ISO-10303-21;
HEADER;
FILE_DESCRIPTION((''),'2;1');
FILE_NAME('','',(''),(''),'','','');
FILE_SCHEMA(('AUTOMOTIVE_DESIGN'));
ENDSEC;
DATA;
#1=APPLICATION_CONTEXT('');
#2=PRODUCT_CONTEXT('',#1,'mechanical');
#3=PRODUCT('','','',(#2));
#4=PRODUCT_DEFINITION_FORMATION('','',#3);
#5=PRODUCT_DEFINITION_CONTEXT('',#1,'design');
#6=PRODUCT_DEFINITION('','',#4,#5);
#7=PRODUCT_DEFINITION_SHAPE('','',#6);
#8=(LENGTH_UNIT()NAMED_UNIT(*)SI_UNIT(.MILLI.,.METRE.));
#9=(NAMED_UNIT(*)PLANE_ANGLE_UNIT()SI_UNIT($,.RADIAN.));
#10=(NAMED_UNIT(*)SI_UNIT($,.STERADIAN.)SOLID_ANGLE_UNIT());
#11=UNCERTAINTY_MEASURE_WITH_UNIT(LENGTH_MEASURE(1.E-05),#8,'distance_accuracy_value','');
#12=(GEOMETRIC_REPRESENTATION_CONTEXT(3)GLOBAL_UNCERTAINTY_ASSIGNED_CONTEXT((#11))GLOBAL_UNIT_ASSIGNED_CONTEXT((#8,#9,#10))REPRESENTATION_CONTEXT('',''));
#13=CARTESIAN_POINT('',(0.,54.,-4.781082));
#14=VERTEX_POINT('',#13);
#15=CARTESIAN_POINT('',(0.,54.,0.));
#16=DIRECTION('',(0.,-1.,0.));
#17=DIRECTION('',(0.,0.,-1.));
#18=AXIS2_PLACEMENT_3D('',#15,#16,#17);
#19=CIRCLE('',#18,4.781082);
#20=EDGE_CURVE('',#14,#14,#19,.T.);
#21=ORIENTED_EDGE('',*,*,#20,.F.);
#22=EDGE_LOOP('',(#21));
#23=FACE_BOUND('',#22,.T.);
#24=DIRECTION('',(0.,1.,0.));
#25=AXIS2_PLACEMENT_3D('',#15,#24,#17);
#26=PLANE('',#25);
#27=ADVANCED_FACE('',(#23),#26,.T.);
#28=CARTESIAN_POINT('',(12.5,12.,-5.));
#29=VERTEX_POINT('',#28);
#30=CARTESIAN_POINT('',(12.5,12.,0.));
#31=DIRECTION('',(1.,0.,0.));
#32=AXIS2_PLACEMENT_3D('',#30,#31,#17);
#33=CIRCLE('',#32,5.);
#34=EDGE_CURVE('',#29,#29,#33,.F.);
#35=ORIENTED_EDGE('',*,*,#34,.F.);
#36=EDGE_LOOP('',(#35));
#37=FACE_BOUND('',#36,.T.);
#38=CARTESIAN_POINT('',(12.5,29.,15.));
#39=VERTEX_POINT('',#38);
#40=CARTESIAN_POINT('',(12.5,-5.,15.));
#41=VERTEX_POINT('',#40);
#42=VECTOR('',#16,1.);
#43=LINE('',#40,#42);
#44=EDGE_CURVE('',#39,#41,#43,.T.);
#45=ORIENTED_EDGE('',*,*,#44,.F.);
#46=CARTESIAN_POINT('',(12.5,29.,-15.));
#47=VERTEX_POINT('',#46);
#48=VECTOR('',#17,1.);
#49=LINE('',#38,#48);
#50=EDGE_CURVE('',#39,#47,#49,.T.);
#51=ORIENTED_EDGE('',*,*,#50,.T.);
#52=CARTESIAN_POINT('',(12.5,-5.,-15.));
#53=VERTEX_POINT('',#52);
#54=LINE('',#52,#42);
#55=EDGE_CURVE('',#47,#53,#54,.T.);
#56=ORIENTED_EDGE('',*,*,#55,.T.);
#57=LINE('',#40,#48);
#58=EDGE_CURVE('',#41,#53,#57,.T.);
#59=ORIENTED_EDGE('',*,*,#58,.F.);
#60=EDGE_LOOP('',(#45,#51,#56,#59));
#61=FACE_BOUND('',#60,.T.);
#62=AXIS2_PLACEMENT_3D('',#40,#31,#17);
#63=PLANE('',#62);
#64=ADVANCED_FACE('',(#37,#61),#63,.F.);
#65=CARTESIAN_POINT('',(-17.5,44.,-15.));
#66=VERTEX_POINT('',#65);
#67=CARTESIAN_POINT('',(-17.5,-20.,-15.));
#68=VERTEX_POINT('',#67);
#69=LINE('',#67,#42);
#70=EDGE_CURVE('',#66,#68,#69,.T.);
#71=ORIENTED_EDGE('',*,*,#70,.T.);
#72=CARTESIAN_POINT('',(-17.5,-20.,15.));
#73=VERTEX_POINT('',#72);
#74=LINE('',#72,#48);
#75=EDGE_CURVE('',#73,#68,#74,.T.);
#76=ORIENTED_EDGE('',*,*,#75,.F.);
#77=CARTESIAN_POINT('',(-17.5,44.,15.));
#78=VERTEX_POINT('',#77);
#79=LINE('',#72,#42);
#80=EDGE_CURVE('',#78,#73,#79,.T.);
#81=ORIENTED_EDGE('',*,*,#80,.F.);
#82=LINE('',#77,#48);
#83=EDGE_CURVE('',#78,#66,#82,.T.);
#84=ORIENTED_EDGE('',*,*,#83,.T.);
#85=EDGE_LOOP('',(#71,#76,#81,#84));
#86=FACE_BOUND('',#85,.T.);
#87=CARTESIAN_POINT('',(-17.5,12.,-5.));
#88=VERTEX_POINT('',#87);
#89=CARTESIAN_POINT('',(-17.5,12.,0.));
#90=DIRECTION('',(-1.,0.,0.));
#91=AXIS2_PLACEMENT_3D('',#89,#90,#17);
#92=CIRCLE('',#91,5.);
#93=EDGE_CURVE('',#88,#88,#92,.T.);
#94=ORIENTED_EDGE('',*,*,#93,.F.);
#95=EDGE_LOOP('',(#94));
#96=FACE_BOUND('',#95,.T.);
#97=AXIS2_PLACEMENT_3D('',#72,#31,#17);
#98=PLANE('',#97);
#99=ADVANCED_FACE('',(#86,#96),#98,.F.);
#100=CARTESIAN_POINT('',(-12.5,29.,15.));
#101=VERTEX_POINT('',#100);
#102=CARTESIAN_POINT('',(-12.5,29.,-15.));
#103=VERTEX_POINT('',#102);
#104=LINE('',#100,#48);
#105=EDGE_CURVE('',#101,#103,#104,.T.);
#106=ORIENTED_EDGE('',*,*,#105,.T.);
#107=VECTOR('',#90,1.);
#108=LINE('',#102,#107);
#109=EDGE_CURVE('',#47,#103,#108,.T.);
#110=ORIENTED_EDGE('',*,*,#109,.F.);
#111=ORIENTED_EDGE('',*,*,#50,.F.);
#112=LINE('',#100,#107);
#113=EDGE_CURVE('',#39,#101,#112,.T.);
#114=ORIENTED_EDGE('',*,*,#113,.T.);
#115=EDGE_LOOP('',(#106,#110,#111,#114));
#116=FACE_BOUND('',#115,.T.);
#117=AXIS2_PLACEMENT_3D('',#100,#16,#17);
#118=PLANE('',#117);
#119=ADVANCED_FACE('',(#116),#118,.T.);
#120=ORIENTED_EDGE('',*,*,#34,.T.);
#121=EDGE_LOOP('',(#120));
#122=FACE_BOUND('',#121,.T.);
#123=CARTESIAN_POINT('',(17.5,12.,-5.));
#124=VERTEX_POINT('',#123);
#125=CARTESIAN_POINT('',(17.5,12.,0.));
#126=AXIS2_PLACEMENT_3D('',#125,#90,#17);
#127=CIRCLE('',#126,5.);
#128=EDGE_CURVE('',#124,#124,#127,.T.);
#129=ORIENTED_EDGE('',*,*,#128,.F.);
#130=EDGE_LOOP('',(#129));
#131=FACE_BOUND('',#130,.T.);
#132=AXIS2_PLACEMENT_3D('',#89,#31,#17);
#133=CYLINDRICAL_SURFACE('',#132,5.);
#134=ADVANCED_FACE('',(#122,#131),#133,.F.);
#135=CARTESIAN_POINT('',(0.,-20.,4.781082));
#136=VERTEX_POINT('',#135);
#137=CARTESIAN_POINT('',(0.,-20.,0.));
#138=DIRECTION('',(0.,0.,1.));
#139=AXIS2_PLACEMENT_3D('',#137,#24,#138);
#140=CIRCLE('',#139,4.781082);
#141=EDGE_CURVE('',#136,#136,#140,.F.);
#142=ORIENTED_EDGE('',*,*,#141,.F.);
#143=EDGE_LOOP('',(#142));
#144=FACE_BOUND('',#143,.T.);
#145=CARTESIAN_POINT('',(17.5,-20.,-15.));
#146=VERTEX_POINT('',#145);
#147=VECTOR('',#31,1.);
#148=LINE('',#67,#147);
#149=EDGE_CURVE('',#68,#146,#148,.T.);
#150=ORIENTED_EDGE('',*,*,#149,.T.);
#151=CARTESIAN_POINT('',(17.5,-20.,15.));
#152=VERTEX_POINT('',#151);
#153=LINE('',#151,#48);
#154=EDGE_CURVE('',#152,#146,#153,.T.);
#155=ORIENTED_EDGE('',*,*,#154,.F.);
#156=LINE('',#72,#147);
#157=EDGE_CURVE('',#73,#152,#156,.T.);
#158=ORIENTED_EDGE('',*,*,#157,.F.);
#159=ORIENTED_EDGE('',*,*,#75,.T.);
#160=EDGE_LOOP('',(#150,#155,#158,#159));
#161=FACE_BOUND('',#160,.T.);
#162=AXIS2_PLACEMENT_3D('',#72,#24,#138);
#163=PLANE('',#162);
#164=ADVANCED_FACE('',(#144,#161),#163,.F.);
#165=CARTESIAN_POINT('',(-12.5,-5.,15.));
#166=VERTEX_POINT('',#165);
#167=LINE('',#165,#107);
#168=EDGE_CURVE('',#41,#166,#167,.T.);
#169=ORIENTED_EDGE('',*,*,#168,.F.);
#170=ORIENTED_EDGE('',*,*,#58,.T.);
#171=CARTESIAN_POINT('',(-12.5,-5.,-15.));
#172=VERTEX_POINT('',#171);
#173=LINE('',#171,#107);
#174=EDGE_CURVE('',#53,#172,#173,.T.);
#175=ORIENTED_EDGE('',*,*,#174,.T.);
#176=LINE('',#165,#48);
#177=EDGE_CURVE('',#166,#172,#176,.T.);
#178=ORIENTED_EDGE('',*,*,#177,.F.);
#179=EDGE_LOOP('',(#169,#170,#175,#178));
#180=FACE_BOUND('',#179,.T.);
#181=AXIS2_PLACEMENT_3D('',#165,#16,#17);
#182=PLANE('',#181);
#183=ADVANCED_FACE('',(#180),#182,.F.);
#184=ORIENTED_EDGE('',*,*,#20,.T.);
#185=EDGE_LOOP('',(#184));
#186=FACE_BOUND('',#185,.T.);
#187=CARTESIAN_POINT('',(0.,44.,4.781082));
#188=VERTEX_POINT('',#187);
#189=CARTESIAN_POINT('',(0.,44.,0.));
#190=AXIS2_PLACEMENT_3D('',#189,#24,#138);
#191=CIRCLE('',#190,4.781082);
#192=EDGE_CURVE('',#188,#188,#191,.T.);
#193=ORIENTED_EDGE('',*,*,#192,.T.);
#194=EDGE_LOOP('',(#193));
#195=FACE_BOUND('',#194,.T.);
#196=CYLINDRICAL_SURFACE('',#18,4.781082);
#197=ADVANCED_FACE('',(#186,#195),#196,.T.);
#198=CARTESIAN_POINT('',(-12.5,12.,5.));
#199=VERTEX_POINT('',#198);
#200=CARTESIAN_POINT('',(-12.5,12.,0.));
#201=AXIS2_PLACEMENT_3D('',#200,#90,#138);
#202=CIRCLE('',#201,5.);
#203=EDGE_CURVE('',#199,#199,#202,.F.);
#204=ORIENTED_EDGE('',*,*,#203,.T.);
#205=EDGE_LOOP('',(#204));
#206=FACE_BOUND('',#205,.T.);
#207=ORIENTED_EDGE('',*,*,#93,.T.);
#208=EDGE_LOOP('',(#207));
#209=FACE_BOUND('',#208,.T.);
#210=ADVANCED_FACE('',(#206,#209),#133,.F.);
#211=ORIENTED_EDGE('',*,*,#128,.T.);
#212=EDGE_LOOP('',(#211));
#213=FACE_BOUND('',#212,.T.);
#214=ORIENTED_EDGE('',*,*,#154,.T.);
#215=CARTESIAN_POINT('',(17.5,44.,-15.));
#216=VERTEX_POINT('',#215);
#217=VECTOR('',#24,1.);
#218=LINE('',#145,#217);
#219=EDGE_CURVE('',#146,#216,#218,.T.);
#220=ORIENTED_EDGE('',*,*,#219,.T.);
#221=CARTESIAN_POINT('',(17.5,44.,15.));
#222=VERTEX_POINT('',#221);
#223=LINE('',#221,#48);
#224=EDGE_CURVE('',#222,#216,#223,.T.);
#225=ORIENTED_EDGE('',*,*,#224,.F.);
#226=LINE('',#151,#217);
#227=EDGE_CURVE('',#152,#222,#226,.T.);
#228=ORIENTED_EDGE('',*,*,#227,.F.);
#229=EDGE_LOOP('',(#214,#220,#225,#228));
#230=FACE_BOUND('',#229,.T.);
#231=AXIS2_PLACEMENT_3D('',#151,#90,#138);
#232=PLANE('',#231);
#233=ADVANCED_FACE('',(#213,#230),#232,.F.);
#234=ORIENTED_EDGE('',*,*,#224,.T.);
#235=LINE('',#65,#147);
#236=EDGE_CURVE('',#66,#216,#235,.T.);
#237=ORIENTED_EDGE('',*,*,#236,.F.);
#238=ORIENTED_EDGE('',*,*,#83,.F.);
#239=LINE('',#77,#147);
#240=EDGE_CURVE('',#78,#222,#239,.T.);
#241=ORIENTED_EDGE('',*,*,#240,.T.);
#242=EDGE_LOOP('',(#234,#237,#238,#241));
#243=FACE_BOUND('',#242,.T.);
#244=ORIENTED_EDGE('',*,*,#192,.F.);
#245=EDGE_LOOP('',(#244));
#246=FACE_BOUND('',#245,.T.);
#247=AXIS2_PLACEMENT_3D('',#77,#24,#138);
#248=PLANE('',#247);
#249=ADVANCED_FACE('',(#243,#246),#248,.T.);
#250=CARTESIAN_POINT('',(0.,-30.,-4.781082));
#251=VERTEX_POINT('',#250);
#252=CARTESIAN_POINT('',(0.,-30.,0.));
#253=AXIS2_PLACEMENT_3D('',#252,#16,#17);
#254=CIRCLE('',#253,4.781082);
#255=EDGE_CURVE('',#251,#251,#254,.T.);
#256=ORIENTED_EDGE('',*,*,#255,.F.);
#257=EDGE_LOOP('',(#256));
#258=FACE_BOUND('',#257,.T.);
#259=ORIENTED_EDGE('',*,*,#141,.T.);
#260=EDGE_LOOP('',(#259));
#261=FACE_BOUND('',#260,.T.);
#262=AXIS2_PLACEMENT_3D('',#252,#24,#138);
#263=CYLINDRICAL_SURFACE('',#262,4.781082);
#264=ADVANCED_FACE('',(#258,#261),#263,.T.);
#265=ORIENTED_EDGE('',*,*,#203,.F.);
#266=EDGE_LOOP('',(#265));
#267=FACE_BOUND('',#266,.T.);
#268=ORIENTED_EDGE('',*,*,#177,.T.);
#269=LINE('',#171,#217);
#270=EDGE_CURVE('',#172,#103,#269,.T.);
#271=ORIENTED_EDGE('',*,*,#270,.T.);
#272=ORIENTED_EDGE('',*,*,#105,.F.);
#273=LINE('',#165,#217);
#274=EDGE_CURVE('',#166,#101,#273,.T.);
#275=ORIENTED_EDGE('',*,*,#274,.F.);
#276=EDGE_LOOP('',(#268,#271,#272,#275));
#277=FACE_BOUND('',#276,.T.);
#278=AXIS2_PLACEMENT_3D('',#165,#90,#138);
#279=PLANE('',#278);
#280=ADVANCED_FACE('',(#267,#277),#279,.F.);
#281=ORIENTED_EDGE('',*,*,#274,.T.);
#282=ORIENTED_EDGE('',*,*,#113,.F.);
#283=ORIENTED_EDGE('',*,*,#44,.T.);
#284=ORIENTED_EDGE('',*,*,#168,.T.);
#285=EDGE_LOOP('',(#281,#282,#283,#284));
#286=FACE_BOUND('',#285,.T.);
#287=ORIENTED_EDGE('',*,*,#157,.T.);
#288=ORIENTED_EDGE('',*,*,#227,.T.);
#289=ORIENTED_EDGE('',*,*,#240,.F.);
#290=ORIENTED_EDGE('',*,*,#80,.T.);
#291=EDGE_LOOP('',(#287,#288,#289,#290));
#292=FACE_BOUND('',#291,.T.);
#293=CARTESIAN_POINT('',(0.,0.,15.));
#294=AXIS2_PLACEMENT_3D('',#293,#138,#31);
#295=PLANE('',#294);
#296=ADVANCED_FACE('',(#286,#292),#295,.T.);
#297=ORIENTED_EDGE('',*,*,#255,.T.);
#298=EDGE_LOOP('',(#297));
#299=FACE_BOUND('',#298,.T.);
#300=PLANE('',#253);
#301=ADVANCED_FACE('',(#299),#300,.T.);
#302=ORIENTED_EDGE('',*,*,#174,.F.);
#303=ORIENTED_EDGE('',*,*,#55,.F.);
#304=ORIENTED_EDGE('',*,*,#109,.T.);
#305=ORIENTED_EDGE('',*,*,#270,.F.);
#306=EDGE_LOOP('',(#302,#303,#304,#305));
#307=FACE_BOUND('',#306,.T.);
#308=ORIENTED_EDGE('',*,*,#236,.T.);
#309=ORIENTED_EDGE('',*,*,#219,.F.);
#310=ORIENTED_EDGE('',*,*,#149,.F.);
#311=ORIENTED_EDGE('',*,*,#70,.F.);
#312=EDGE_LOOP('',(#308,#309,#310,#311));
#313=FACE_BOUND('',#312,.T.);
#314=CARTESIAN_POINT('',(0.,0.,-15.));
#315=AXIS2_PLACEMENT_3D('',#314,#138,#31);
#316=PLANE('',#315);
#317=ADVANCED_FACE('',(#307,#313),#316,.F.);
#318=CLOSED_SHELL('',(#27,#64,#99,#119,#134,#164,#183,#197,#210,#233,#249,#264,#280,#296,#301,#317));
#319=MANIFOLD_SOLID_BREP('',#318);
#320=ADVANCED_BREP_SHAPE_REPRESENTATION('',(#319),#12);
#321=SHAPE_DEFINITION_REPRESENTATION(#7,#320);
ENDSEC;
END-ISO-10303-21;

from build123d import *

# Parameters (mm, degrees)
EXTRUDE_1_DEPTH     = 15
SKETCH_2_R          = 5
CUT_EXTRUDE_1_DEPTH = 44.011626335
SKETCH_3_R          = 4.781082329
EXTRUDE_2_DEPTH     = 10


with BuildPart() as part:
    # 草图1 → 凸台-拉伸1 (new, symmetric)
    with BuildSketch(Plane.XY):
        Polygon((-17.5, -20), (17.5, -20), (17.5, 20), (12.5, 20), (12.5, -5), (-12.5, -5), (-12.5, 20), (-17.5, 20), align=None)
    extrude_1 = extrude(amount=EXTRUDE_1_DEPTH, both=True)

    # 草图2 → 切除-拉伸1 (cut, through all)
    with BuildSketch(Plane(origin=(17.5, 0, 0), x_dir=(0, 0, -1), z_dir=(1, 0, 0))):
        with Locations((0, 12)):
            Circle(SKETCH_2_R)
    cut_extrude_1 = extrude(amount=-CUT_EXTRUDE_1_DEPTH, mode=Mode.SUBTRACT)

    # 草图3 → 凸台-拉伸2 (add)
    with BuildSketch(Plane.XZ.offset(20)):
        Circle(SKETCH_3_R)
    extrude_2 = extrude(amount=EXTRUDE_2_DEPTH)

    # 镜向1: 凸台-拉伸1, 切除-拉伸1, 凸台-拉伸2 across plane
    add(extrude_1.mirror(Plane.ZX.offset(12)))
    add(cut_extrude_1.mirror(Plane.ZX.offset(12)), mode=Mode.SUBTRACT)
    add(extrude_2.mirror(Plane.ZX.offset(12)))


solid = part.part
